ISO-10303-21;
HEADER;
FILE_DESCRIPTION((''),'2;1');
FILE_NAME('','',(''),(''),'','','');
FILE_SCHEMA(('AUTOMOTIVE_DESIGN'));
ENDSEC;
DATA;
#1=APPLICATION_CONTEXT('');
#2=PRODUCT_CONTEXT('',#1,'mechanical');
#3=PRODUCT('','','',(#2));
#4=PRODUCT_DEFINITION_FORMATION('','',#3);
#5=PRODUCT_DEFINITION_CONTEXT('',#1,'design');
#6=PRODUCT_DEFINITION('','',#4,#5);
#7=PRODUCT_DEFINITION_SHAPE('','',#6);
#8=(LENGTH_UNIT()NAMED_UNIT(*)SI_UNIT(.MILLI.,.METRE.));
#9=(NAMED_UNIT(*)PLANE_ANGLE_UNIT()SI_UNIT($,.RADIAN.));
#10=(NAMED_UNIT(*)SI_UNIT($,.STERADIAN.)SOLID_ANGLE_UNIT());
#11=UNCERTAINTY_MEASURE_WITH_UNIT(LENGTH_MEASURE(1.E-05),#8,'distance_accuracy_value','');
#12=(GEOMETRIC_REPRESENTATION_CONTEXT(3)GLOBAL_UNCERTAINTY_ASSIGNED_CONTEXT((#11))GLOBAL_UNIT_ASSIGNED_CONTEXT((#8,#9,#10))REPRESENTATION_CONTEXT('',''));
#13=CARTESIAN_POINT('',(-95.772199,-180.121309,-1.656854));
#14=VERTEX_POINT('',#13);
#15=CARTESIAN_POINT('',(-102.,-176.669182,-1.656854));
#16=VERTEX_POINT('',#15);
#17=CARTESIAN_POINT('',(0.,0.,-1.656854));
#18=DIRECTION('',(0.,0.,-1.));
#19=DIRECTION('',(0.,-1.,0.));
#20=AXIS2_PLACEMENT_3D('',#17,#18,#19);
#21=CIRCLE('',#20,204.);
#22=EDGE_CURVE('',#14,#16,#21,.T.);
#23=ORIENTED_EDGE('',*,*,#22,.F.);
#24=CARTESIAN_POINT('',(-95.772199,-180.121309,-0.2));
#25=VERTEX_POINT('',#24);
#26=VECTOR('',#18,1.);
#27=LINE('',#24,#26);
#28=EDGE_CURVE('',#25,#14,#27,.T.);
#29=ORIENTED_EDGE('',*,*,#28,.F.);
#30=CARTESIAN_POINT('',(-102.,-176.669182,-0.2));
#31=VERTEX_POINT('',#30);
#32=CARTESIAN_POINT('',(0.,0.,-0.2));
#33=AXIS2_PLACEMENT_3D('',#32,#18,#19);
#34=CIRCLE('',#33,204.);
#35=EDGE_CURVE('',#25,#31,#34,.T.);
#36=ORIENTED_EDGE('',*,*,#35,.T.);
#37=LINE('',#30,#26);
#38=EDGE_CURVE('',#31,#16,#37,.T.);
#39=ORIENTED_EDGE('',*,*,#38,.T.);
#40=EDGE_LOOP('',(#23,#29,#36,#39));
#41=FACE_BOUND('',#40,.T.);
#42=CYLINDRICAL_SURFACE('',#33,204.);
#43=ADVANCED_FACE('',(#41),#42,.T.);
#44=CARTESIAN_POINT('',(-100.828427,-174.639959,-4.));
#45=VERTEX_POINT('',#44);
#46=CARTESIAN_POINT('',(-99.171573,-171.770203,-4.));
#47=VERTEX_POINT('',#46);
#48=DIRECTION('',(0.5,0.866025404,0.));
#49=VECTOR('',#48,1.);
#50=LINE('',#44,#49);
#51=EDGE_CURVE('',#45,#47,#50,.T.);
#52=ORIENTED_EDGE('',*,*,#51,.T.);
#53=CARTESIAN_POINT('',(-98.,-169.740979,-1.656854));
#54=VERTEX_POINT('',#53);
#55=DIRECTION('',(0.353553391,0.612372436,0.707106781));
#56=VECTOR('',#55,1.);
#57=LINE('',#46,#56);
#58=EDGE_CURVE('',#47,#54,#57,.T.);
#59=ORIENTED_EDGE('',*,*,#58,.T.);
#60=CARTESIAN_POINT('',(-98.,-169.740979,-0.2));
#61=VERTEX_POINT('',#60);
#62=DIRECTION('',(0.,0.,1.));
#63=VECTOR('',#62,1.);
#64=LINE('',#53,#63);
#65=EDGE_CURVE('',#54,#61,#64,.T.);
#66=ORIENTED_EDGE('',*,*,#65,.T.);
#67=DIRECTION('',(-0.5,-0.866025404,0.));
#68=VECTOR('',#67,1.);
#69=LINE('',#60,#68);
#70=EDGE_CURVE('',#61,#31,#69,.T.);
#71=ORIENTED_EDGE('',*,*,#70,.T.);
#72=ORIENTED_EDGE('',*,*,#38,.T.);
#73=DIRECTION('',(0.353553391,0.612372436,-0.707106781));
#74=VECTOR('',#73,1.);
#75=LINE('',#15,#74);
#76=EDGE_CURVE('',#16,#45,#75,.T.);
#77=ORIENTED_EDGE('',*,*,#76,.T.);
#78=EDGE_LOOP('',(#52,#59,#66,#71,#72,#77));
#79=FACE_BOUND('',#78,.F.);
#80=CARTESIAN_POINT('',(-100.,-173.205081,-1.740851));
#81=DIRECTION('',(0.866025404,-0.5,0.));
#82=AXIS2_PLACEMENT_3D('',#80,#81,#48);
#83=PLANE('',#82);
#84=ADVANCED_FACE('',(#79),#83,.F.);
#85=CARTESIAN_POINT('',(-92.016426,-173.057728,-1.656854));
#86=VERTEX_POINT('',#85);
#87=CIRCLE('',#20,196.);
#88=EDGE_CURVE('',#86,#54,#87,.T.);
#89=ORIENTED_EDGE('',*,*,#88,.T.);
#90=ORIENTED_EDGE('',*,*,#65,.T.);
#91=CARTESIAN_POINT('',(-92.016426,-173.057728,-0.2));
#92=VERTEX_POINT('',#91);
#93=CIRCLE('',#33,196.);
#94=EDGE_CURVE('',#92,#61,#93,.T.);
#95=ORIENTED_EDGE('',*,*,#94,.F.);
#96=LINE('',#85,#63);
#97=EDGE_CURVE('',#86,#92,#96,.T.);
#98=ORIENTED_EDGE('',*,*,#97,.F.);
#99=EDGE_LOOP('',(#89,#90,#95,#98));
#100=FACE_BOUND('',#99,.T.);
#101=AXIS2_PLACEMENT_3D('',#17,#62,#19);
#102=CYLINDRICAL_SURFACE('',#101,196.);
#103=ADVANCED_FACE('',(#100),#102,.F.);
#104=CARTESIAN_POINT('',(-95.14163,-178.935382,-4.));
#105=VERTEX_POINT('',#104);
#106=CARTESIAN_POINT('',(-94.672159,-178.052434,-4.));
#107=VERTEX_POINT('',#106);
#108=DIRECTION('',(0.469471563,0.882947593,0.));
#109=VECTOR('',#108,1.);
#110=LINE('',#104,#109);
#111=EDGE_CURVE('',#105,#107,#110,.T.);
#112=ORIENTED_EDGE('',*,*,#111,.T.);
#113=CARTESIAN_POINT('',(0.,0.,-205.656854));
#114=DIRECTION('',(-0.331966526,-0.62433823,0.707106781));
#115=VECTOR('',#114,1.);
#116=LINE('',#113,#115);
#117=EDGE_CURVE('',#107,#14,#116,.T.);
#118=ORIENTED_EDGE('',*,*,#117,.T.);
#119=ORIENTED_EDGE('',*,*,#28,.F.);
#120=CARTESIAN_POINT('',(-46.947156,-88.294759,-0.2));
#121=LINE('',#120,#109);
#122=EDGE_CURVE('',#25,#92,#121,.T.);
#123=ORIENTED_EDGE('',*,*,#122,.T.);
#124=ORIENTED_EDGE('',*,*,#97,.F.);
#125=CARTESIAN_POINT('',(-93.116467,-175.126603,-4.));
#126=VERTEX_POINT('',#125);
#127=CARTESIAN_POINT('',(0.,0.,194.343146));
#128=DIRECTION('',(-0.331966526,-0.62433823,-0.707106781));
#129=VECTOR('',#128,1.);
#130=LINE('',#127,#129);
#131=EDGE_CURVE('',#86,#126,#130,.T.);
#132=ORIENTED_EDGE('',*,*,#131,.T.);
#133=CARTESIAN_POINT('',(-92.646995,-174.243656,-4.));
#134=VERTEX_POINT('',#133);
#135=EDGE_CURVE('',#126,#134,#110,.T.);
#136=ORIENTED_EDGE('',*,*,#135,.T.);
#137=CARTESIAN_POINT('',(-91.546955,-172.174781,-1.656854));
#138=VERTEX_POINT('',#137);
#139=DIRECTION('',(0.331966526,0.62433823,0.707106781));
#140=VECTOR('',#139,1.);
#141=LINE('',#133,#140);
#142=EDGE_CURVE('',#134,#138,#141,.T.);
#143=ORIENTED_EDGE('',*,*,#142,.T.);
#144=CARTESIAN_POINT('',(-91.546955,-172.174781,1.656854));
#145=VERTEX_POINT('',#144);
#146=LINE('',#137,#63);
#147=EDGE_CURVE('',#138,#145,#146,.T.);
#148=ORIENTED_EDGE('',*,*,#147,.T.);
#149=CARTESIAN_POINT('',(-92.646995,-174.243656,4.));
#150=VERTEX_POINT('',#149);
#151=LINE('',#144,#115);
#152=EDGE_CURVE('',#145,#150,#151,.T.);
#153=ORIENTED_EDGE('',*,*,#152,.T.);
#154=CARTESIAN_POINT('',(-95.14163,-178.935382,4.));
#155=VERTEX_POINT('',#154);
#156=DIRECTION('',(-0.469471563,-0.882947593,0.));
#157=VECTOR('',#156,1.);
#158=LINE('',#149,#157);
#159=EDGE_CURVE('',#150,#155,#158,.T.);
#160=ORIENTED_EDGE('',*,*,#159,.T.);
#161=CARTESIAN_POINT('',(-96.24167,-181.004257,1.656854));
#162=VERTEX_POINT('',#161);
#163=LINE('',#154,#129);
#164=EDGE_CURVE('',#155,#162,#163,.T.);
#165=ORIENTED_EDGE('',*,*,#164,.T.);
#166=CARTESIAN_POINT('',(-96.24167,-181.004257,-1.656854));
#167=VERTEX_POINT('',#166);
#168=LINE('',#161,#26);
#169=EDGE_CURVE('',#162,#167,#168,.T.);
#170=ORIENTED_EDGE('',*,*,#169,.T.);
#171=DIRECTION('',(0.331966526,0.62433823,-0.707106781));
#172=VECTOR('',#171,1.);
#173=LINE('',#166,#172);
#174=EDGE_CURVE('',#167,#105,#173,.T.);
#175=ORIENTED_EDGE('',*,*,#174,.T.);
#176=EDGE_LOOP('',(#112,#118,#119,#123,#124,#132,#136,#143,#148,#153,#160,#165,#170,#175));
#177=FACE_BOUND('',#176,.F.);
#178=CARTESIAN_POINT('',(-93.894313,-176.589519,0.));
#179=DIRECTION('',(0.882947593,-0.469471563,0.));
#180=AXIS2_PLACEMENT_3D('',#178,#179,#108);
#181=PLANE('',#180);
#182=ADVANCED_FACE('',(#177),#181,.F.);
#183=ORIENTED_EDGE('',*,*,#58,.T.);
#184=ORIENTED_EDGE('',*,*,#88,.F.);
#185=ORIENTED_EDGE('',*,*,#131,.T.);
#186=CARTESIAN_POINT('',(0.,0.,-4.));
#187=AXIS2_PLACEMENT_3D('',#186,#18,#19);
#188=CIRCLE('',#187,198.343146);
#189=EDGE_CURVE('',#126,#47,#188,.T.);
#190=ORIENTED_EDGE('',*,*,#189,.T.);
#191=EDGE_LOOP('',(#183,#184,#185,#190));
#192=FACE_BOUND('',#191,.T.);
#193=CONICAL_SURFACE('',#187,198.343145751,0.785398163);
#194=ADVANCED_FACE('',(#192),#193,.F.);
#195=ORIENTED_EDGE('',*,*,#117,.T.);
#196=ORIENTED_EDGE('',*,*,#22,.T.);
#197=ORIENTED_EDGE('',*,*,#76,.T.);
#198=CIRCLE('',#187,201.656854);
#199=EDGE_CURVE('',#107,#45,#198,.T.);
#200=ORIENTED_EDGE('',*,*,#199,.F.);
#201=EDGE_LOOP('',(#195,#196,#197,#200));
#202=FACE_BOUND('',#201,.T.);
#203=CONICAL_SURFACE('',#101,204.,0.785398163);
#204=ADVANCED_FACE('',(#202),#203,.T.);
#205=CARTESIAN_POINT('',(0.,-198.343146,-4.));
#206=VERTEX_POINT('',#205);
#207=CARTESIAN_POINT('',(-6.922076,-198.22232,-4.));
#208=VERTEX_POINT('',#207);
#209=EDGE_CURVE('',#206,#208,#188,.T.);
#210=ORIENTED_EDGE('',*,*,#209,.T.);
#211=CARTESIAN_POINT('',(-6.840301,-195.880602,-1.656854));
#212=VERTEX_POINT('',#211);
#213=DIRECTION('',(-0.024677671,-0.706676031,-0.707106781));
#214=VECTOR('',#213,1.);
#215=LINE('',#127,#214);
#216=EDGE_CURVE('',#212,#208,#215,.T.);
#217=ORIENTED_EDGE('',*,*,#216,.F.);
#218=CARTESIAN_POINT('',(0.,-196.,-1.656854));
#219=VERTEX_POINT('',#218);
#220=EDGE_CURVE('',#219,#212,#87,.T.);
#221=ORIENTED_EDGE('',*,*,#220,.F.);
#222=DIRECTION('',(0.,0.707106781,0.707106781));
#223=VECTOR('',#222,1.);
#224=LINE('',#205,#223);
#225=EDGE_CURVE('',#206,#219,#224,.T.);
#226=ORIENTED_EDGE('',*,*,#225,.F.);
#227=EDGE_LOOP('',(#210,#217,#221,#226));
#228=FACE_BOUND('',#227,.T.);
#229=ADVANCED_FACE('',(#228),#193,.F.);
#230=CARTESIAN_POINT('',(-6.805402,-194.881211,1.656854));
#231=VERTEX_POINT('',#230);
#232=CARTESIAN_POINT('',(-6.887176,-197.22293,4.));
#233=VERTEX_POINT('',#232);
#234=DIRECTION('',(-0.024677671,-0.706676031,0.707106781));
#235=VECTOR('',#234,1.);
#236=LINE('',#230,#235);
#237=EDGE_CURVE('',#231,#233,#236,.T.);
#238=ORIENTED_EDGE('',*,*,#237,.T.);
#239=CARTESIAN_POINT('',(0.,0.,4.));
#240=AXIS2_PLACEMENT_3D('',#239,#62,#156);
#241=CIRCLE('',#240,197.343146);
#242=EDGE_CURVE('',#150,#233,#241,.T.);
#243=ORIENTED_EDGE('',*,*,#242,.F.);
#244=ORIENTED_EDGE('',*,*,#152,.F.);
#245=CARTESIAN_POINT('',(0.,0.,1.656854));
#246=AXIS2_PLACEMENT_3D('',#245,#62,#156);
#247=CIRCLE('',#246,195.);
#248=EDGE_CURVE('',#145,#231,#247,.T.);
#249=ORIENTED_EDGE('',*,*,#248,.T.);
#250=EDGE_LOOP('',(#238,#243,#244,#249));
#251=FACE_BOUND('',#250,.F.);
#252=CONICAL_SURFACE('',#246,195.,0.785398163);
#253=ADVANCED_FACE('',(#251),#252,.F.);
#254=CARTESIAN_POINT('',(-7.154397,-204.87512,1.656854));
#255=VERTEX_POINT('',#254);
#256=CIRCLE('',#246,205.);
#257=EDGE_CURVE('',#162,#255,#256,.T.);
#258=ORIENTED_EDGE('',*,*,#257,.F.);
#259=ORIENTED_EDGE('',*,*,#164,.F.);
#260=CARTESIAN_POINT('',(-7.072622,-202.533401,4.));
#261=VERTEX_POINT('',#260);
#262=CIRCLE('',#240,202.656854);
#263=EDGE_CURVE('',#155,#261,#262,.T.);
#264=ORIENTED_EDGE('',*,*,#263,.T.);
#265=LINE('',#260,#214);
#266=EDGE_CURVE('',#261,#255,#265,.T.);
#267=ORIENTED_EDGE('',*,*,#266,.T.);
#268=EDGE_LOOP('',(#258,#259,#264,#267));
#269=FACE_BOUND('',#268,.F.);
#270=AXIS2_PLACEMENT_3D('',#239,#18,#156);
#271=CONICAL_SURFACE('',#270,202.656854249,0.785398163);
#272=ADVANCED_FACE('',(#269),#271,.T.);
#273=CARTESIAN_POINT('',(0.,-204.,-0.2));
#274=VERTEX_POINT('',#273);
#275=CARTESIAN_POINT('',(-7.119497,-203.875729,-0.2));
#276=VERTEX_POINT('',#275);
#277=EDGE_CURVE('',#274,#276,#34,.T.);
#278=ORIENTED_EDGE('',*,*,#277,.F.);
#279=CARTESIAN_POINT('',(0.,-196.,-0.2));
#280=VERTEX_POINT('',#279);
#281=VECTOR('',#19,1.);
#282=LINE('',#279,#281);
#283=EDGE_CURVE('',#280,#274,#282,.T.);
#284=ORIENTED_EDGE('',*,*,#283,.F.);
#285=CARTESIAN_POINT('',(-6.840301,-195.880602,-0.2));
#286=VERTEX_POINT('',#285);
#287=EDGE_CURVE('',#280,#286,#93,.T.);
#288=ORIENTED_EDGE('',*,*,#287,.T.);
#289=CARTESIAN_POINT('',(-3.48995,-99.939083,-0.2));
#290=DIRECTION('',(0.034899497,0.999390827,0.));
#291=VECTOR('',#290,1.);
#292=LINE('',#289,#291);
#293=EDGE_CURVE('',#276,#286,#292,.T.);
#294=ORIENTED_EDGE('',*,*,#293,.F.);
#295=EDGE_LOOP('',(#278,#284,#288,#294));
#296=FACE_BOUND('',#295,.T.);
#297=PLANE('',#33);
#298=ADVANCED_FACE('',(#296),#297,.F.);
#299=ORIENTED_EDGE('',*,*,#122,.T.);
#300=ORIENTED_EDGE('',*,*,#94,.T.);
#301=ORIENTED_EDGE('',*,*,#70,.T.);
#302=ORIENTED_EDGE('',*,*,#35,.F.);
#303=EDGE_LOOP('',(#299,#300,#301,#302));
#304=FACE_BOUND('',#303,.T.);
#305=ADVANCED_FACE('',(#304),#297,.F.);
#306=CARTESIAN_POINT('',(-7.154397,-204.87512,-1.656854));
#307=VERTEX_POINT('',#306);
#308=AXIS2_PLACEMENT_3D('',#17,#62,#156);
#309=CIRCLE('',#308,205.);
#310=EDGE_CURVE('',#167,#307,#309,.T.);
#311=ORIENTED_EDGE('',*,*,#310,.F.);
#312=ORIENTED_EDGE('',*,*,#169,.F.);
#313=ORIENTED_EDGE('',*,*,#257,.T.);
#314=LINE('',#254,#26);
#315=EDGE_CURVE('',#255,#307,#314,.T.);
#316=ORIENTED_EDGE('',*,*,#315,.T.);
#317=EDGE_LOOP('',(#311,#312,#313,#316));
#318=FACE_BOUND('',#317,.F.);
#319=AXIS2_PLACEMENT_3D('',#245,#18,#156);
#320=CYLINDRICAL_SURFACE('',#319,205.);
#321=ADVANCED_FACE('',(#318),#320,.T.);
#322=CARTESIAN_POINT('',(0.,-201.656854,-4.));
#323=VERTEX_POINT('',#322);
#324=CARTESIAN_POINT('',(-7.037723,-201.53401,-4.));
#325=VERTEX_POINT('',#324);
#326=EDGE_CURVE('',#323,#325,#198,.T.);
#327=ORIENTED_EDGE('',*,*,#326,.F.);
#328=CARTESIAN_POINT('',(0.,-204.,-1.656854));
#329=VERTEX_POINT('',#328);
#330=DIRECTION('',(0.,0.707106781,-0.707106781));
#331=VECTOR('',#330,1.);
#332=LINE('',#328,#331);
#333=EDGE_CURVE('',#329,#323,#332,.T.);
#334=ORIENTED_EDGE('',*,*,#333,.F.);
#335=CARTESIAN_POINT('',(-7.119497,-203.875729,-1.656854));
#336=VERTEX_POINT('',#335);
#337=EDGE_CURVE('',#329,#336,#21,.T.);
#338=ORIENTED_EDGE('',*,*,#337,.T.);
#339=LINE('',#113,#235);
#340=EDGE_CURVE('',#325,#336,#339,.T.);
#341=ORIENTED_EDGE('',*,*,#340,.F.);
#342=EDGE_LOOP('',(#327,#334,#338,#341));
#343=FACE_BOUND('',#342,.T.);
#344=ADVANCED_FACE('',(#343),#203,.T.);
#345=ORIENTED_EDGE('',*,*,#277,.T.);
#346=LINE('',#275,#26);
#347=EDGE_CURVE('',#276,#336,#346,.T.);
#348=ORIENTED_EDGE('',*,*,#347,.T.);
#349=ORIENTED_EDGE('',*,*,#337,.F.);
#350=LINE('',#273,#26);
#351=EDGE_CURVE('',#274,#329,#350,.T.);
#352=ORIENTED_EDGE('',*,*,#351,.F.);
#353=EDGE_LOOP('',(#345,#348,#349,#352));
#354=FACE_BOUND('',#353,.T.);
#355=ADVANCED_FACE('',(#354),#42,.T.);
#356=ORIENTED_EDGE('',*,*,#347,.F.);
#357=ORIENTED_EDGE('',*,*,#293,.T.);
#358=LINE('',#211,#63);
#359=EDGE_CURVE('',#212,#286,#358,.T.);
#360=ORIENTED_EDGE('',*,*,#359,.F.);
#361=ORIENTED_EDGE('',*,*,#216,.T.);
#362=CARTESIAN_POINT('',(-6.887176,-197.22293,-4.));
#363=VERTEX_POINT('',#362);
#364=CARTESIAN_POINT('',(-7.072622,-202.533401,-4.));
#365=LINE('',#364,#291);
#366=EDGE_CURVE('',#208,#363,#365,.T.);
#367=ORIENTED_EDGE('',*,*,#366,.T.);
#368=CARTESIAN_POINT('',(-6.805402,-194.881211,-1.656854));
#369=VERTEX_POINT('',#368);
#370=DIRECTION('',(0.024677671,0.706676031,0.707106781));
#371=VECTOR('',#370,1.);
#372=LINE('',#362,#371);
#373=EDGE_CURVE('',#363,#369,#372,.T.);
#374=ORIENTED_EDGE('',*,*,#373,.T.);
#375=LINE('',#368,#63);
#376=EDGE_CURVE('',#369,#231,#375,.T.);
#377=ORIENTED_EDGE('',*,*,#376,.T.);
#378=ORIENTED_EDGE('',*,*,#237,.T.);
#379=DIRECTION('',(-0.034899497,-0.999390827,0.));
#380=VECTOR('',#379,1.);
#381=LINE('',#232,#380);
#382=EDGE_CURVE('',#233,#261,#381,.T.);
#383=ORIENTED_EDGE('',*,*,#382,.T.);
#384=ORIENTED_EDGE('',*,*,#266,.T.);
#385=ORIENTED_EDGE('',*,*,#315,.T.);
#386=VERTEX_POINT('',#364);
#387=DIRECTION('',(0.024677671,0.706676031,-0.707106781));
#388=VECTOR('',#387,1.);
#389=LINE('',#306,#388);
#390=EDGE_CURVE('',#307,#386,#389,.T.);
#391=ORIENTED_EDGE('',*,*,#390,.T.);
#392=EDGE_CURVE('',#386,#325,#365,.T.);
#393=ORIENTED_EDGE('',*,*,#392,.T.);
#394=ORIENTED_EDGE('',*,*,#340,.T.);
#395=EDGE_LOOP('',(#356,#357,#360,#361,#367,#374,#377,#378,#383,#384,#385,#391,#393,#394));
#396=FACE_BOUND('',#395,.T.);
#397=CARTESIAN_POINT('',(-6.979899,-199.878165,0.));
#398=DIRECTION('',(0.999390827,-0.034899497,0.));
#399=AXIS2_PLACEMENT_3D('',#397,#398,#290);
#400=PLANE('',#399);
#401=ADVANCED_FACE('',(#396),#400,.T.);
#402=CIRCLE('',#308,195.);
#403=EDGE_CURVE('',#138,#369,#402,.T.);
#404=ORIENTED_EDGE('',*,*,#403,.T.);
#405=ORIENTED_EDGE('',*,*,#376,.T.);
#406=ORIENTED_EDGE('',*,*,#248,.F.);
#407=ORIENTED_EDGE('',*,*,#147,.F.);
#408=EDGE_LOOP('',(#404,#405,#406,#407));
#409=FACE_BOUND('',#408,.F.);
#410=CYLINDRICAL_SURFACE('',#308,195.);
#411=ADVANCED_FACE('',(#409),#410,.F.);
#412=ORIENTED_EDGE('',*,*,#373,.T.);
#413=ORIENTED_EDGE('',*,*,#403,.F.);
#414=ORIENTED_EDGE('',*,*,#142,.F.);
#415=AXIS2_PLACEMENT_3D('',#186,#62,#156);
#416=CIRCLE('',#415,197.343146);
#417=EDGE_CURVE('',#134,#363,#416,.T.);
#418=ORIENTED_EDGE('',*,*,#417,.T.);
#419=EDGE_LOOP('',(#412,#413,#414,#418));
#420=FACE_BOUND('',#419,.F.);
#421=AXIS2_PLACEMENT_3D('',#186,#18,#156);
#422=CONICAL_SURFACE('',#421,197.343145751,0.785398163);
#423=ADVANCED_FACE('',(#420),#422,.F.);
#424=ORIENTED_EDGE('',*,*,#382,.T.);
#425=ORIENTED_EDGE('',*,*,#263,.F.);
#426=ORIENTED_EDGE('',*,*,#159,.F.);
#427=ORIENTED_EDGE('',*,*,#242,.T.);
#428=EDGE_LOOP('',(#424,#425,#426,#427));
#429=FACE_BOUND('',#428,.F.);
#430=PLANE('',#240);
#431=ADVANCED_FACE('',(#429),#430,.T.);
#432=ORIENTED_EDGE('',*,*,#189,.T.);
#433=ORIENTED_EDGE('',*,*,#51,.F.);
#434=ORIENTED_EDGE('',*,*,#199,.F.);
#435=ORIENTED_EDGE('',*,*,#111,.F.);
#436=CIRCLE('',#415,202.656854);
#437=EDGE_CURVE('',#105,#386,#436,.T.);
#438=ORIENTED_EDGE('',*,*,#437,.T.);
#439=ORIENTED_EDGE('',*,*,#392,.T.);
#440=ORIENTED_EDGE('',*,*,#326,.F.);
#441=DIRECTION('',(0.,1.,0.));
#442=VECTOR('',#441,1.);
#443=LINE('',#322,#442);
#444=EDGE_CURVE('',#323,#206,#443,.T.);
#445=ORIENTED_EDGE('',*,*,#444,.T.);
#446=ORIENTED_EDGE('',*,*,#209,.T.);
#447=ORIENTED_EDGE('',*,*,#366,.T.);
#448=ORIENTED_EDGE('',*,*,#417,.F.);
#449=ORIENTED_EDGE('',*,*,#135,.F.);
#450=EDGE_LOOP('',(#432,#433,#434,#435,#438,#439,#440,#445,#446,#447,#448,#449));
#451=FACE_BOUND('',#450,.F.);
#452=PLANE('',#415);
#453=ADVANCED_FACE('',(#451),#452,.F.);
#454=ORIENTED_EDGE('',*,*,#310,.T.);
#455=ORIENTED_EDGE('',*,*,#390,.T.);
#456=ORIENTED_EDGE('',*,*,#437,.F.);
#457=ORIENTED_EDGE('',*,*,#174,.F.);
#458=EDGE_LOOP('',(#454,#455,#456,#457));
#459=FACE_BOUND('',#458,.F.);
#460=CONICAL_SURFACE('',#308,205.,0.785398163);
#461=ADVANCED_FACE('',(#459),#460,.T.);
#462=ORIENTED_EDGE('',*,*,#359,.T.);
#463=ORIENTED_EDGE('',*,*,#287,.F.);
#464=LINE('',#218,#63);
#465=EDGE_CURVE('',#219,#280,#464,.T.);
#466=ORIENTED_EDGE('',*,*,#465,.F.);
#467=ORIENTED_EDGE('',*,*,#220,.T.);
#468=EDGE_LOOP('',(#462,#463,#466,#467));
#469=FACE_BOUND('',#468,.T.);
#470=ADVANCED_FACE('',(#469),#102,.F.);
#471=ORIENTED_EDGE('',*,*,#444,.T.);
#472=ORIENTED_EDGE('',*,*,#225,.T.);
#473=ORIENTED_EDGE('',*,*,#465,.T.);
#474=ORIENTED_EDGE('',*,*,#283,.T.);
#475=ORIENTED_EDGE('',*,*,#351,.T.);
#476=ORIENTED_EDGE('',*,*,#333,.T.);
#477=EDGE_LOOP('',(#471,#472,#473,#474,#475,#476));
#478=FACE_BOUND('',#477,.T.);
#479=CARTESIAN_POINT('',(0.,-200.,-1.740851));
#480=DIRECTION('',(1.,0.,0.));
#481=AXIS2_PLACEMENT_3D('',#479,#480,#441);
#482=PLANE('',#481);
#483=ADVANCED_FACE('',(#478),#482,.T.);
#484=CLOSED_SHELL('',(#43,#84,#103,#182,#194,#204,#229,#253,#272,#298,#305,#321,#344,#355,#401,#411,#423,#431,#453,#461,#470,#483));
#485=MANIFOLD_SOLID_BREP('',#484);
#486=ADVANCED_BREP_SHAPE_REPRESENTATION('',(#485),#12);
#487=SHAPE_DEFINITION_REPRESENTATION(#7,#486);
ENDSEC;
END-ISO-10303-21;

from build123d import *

# Parameters (mm, degrees)
F3_ANGLE_BACK = 15
F3_ANGLE      = 30
F4_ANGLE_BACK = 13
F4_ANGLE      = 26
F5_ANGLE      = 15


# Not quite as in the source:
# - a feature of the source that left no trace in its solid (it failed there, or was rolled back) is left out


with BuildPart() as f3:
    # F0 (on Right) → F3 (revolve)
    with BuildSketch(Plane.YZ, mode=Mode.PRIVATE) as f3_sk:
        Polygon((-198.3431457505, -4), (-196, -1.6568542495), (-196, -0.2), (-204, -0.2), (-204, -1.6568542495), (-201.6568542495, -4), align=None)
    revolve(f3_sk.sketch.rotate(Axis((0, 0, 14.9391144514), (0, 0, -1)), -F3_ANGLE_BACK), axis=Axis((0, 0, 14.9391144514), (0, 0, -1)), revolution_arc=F3_ANGLE)

    # F2 (on Right) → F4 (revolve)
    with BuildSketch(Plane.YZ, mode=Mode.PRIVATE) as f4_sk:
        Polygon((-195, 1.6568542495), (-197.3431457505, 4), (-202.6568542495, 4), (-205, 1.6568542495), (-205, -1.6568542495), (-202.6568542495, -4), (-197.3431457505, -4), (-195, -1.6568542495), align=None)
    revolve(f4_sk.sketch.rotate(Axis((0, 0, 27.1144676954), (0, 0, 1)), -F4_ANGLE_BACK), axis=Axis((0, 0, 27.1144676954), (0, 0, 1)), revolution_arc=F4_ANGLE)


with BuildPart() as f3_1:
    # F5: moved
    add(f3.part.rotate(Axis((0, 0, 14.9391144514), (0, 0, -1)), F5_ANGLE))


solid = f3_1.part
